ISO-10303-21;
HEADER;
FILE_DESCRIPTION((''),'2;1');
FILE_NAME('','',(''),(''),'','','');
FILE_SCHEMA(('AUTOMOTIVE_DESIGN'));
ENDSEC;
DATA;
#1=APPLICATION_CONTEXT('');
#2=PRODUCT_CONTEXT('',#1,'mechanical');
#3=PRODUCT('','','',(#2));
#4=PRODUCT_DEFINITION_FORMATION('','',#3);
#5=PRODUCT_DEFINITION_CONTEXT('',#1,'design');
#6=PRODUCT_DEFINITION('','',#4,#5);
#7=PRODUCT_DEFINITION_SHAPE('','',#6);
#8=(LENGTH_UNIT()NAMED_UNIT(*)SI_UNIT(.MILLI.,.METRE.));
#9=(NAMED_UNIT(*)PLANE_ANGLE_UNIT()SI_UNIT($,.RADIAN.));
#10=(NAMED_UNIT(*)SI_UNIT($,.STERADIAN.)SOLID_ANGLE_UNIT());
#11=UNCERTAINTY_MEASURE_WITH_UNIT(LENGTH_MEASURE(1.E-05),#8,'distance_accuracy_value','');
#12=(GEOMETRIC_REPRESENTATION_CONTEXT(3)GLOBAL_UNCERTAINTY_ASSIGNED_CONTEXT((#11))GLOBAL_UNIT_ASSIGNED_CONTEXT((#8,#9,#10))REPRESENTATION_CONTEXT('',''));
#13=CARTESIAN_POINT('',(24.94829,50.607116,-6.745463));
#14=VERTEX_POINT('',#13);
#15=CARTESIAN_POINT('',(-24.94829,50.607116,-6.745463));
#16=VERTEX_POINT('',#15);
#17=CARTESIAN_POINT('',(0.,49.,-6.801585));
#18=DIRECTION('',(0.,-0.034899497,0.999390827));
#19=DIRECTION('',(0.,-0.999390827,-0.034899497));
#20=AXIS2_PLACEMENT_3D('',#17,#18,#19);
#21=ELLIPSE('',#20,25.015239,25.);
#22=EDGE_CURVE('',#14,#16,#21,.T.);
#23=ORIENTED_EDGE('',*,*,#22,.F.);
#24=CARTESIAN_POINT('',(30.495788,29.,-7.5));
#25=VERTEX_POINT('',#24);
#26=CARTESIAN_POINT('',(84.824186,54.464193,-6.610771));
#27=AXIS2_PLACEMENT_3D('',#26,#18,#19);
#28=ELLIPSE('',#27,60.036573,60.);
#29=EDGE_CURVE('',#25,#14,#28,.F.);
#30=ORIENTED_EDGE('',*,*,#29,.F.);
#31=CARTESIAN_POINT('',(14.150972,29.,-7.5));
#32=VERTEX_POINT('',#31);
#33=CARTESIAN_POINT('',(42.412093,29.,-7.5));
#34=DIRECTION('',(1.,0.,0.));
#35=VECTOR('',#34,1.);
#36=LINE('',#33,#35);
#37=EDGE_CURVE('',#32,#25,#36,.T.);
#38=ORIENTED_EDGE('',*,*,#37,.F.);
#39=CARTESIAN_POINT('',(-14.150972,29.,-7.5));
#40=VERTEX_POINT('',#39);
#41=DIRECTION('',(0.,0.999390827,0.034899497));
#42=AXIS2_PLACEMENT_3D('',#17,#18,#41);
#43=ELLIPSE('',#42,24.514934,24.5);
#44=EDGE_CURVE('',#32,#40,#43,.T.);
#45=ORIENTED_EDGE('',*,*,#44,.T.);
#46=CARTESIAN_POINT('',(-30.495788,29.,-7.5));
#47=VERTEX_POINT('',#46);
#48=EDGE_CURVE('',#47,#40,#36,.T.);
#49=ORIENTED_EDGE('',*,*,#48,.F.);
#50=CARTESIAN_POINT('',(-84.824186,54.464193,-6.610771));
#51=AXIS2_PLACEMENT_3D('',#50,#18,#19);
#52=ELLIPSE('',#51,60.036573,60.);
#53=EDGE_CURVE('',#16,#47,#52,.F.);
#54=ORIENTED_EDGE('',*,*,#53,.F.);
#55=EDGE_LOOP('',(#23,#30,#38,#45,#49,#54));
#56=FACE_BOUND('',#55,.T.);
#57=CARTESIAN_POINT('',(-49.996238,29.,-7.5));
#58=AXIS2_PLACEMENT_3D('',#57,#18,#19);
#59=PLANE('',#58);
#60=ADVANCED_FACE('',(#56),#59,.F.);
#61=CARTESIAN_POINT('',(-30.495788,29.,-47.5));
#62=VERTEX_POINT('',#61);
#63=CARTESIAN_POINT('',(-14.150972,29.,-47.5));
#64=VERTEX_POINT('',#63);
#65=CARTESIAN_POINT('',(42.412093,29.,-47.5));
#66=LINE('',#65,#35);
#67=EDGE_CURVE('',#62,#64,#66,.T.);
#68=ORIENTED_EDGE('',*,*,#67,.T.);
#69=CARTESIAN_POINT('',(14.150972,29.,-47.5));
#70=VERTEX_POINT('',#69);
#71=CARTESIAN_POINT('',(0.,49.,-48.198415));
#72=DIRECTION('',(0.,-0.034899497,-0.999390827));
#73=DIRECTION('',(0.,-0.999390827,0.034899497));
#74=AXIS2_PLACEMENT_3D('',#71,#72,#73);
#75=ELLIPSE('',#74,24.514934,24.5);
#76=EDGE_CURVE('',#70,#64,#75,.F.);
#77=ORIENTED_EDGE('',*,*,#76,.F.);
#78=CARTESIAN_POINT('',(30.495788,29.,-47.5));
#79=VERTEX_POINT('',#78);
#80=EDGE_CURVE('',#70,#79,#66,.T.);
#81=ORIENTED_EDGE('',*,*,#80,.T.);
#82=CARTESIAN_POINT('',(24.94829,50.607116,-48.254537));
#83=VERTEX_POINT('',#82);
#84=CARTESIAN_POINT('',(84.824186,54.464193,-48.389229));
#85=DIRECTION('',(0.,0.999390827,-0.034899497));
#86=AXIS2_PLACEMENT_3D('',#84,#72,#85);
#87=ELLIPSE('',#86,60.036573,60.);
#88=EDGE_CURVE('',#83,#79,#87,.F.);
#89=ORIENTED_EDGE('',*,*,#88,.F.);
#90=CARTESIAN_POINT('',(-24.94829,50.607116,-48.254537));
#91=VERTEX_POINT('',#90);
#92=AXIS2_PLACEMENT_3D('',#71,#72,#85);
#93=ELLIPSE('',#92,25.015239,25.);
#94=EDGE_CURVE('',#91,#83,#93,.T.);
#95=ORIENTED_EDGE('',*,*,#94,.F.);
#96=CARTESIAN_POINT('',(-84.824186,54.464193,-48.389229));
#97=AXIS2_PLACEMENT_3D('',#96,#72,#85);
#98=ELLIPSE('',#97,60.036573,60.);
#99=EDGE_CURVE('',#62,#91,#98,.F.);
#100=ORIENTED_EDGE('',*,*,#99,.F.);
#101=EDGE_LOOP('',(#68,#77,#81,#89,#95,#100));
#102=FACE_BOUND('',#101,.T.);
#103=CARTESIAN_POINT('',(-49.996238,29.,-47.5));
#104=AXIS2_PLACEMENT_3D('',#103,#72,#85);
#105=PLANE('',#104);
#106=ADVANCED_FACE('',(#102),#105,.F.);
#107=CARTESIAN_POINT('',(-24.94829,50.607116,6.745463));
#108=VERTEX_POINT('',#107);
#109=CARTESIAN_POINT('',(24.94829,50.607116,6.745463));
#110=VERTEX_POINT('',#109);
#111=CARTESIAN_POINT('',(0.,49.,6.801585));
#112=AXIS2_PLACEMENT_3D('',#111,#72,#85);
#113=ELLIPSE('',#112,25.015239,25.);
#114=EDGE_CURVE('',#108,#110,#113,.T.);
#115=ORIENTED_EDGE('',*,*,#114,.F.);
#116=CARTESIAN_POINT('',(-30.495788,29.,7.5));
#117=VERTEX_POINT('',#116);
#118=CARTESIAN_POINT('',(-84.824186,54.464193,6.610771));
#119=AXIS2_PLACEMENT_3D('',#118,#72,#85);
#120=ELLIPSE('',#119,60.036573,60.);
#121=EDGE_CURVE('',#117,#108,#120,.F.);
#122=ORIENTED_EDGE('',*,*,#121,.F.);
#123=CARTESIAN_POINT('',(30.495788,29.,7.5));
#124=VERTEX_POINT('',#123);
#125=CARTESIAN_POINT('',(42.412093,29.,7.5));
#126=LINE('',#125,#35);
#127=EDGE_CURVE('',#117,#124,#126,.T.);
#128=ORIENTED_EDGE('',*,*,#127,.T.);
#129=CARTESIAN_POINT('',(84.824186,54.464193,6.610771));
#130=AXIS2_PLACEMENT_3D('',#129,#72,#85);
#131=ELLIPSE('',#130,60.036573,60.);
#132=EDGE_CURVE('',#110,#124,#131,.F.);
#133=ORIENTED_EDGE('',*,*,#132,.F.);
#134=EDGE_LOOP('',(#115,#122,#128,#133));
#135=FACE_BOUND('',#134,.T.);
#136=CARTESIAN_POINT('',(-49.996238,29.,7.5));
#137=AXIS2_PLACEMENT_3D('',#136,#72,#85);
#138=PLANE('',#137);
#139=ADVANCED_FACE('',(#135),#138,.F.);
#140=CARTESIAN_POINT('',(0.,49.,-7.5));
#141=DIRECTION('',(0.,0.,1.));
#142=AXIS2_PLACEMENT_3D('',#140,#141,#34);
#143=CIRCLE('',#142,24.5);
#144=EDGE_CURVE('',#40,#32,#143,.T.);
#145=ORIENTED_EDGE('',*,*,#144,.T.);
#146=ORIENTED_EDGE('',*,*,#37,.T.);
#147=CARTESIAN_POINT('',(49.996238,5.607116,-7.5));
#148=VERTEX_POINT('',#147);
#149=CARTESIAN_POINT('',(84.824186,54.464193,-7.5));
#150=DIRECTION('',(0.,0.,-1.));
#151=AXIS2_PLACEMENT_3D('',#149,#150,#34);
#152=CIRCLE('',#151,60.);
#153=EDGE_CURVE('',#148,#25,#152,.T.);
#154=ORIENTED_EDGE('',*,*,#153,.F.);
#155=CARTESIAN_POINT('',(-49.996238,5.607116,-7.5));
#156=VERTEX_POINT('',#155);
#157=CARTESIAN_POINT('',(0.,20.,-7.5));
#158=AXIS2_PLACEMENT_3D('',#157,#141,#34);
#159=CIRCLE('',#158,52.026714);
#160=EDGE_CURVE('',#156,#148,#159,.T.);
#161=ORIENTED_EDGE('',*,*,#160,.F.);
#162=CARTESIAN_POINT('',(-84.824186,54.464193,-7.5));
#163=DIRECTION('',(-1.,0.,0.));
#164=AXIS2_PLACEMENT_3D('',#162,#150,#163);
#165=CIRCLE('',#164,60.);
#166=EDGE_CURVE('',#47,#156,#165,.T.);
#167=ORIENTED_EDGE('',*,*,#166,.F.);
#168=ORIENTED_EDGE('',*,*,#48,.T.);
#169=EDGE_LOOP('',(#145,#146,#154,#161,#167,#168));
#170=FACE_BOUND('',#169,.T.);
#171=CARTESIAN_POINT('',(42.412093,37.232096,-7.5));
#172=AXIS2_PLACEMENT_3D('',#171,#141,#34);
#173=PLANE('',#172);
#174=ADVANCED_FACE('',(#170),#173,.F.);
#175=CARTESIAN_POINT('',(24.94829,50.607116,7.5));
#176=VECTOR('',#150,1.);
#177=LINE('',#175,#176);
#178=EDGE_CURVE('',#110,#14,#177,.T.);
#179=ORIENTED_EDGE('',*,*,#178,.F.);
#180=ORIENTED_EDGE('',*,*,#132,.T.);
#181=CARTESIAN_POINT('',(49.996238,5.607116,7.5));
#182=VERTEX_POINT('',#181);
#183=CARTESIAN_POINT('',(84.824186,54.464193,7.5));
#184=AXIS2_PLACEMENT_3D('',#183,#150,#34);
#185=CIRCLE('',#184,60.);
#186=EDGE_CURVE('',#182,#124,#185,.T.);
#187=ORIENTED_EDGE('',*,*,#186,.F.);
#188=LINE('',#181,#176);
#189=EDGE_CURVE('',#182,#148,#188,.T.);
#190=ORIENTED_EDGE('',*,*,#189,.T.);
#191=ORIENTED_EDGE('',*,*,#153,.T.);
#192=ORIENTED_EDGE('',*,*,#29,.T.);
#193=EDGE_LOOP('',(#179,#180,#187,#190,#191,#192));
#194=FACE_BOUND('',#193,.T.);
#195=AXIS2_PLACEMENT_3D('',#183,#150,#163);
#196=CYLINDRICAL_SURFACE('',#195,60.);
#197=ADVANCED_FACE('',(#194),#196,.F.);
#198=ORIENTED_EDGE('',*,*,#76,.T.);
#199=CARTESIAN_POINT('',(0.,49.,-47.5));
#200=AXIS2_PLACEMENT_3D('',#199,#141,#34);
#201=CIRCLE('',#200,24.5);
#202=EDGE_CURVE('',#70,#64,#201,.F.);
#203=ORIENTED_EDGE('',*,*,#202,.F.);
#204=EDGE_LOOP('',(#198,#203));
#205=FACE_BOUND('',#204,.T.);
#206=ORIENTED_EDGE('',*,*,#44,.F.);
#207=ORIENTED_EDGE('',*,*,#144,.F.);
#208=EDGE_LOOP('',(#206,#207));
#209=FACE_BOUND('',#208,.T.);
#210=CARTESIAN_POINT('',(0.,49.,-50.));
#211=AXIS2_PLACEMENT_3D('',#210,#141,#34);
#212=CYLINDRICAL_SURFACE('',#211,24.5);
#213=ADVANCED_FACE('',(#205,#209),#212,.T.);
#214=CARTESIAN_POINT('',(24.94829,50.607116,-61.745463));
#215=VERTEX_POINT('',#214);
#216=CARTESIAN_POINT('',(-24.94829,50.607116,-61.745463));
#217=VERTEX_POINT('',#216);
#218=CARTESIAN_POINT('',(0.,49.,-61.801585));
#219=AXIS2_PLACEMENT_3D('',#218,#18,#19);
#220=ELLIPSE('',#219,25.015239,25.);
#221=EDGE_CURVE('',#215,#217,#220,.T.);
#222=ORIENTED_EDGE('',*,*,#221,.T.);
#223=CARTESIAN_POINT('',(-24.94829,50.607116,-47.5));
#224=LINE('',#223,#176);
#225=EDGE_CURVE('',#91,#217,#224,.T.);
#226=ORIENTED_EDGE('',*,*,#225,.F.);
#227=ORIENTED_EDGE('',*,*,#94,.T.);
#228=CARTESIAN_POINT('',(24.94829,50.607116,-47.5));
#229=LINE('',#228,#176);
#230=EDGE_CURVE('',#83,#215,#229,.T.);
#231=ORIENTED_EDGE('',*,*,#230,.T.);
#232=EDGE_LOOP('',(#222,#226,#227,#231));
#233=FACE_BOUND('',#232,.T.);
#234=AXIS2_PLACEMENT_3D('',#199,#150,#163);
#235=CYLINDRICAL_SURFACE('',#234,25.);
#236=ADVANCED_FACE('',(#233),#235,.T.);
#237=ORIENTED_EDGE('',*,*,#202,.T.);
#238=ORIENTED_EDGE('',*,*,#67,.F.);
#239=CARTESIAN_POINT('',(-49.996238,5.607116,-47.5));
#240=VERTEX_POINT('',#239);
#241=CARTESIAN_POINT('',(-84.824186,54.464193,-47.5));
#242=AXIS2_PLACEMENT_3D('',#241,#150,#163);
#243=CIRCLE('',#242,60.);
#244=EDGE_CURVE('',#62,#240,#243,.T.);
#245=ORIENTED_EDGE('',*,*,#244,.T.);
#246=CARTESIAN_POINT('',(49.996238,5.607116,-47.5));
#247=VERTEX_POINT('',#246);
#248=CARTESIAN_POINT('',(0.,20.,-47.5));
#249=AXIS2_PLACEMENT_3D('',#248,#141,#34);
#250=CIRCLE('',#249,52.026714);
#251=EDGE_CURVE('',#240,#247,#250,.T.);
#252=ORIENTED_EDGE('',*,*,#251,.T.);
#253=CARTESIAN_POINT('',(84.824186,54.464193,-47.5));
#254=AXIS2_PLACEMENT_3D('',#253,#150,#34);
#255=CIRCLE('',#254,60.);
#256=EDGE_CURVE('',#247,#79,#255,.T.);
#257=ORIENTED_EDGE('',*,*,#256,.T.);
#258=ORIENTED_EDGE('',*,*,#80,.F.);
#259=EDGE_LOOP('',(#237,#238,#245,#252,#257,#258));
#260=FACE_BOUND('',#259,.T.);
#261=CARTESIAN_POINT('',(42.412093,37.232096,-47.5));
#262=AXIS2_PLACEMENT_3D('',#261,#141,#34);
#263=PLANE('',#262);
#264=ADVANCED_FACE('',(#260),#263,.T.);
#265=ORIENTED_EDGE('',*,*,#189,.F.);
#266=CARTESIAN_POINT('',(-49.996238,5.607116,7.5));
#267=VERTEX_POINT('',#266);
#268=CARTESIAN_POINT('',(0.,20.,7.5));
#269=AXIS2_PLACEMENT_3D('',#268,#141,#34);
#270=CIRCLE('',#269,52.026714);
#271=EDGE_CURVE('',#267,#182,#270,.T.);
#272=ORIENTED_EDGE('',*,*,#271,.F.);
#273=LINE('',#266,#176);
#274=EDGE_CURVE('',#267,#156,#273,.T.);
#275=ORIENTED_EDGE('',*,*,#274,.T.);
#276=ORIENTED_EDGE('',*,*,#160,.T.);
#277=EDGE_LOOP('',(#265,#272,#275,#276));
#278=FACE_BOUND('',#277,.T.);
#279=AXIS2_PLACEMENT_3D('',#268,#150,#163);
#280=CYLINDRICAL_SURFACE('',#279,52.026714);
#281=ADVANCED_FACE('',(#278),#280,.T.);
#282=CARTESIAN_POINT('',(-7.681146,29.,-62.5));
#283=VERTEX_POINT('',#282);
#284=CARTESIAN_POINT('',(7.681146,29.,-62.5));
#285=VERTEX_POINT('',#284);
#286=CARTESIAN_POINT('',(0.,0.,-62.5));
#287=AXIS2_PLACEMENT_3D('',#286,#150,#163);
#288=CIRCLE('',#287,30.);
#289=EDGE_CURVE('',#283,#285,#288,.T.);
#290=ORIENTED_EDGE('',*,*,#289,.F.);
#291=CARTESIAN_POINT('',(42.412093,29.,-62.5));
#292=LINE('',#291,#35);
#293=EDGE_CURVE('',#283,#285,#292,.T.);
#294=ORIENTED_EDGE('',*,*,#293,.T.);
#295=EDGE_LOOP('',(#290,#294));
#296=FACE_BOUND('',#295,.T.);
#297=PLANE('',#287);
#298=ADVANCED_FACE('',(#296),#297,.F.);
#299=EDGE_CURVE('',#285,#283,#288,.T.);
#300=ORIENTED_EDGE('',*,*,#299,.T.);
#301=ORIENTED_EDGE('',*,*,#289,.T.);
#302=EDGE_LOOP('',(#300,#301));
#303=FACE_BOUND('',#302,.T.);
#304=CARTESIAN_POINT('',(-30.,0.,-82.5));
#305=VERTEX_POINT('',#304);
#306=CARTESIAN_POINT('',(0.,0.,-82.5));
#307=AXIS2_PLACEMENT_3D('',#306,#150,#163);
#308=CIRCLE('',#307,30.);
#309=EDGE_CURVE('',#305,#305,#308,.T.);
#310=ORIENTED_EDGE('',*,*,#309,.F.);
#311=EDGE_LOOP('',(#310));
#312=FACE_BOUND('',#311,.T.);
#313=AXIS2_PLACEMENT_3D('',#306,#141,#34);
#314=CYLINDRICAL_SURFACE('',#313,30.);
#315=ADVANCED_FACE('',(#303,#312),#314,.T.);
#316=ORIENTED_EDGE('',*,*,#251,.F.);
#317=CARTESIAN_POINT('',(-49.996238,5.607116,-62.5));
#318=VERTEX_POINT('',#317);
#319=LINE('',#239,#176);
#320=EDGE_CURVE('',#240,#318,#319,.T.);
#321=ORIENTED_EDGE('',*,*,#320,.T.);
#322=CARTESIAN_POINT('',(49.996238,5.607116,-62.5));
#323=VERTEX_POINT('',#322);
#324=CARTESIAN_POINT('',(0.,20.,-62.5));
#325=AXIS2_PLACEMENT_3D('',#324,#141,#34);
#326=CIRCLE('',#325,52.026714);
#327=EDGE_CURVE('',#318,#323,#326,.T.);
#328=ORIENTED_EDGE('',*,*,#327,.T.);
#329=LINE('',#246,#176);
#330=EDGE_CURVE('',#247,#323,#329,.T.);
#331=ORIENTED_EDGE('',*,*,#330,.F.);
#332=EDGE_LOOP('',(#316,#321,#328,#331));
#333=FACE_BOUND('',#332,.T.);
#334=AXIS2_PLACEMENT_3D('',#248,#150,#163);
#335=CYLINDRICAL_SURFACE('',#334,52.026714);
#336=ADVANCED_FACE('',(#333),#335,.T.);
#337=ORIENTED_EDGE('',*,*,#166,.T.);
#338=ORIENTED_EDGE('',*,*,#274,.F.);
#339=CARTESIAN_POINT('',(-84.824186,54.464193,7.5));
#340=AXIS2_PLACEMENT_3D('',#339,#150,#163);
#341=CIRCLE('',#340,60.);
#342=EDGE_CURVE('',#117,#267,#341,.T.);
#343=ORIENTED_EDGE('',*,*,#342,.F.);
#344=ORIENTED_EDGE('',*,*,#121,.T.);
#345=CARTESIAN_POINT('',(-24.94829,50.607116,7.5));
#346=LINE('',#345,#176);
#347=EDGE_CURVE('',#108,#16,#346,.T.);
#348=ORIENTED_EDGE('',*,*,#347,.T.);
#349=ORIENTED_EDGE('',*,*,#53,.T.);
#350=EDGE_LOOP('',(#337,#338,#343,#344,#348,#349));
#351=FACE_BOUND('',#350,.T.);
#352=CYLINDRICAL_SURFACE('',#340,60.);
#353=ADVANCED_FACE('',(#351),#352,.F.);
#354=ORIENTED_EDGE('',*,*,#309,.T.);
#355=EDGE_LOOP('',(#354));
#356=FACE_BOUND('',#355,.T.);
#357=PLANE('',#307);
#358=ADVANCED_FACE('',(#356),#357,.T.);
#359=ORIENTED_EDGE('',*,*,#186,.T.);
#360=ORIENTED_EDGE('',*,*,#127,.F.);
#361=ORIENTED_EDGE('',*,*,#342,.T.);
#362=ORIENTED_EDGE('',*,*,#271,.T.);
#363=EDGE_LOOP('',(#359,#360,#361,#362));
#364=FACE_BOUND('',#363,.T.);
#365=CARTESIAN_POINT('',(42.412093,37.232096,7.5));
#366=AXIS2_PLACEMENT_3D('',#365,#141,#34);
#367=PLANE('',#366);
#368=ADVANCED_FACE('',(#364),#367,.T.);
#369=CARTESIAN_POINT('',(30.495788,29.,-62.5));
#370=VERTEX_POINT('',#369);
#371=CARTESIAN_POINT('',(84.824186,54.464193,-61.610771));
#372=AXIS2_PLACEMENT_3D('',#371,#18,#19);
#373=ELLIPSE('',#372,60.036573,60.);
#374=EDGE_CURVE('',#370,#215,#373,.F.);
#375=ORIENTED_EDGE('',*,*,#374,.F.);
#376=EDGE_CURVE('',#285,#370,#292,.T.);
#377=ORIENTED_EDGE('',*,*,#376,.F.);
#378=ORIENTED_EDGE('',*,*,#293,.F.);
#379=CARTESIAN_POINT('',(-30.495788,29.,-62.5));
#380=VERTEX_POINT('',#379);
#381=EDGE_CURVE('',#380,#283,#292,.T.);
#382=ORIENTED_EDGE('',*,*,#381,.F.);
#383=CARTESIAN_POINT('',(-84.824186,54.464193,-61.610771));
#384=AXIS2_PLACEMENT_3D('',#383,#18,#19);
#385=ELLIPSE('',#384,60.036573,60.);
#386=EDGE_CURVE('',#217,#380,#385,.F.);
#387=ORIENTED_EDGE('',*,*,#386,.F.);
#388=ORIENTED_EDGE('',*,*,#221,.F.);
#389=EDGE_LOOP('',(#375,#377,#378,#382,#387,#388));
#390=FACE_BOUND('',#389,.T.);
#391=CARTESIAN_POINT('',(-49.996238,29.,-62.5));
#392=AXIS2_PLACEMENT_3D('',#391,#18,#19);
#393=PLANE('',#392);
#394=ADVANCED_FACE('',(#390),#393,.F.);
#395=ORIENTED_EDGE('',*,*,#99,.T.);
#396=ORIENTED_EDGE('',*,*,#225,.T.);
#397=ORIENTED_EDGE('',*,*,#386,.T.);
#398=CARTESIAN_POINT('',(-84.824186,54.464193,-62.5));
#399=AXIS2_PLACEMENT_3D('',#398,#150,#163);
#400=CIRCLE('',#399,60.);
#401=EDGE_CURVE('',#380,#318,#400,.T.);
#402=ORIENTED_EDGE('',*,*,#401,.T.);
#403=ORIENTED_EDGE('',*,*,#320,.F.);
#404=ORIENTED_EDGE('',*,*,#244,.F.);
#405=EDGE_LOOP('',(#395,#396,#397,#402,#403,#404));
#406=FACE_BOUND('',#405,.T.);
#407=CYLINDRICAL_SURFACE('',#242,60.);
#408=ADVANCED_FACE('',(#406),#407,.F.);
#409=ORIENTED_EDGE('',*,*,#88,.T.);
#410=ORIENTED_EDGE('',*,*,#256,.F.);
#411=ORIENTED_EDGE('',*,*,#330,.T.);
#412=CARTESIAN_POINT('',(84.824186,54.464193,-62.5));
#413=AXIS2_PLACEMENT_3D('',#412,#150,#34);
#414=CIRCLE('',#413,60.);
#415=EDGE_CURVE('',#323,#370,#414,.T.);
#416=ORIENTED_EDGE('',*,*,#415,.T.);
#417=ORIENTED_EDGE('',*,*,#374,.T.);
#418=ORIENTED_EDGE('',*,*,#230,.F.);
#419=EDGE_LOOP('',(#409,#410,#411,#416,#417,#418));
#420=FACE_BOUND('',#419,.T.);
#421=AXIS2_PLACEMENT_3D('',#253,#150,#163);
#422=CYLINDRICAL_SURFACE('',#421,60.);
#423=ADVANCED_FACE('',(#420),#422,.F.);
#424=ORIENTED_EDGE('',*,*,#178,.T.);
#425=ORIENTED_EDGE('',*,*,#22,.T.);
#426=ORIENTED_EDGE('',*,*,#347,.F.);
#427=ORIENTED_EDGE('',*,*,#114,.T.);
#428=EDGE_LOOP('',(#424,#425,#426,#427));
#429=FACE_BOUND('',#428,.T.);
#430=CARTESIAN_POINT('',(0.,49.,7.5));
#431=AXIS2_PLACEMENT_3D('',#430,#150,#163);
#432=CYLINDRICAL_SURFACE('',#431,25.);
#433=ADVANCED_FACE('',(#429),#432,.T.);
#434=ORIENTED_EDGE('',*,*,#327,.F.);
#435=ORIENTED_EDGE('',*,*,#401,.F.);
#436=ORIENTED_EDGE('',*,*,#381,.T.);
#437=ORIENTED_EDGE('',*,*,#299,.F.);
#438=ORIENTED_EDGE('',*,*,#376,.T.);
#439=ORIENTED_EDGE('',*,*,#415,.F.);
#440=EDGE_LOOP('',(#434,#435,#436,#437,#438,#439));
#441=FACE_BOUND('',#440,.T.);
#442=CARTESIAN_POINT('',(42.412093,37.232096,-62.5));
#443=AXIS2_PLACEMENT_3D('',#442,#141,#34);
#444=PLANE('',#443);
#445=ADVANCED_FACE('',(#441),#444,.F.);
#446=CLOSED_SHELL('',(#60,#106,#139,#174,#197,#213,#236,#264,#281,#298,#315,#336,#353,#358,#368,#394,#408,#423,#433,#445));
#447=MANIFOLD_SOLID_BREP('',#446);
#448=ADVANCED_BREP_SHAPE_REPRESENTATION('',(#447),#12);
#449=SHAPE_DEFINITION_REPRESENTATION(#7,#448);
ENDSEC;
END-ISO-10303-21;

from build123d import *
from build123d.topology import SkipClean

# Parameters (mm, degrees)
BOSS_EXTRUDE1_DEPTH   = 7.5
CUT_EXTRUDE1_DEPTH    = 90.620722002
SKETCH4_R             = 24.5
BOSS_EXTRUDE3_DEPTH   = 50
LPATTERN6_START       = -60.928565373
LPATTERN6_DEPTH       = 11.857130746
LPATTERN6_START_2     = -62.5
LPATTERN6_2_OUTLINE_R = 24.5
LPATTERN6_2_DEPTH     = 15
LPATTERN6_3_OUTLINE_R = 24.5
LPATTERN6_3_DEPTH     = 1.571434627
LPATTERN6_START_3     = -49.996237981
LPATTERN6_4_DEPTH     = 99.992475962
BOSS_EXTRUDE5_DEPTH   = 10
SKETCH8_R             = 30
BOSS_EXTRUDE7_DEPTH   = 20


with BuildPart() as part:
    # Sketch1 → Boss-Extrude1 (new, symmetric)
    with BuildSketch(Plane.XY):
        with BuildLine():
            ThreePointArc((-24.948290112, 50.607115575), (0, 74), (24.948290112, 50.607115575))
            ThreePointArc((24.948290112, 50.607115575), (32.398481343, 25.282941249), (49.996237981, 5.607115575))
            ThreePointArc((49.996237981, 5.607115575), (0, -32.02671366), (-49.996237981, 5.607115575))
            ThreePointArc((-49.996237981, 5.607115575), (-32.398481343, 25.282941249), (-24.948290112, 50.607115575))
        make_face()
    extrude(amount=BOSS_EXTRUDE1_DEPTH, both=True)

    # Sketch2 → Cut-Extrude1 (cut, symmetric)
    with BuildSketch(Plane(origin=(0, 0, 0), x_dir=(0, 0, -1), z_dir=(1, 0, 0))):
        Polygon((-7.5, 29), (-5.928565373, 74), (-7.5, 74), align=None)
        Polygon((7.5, 74), (7.5, 29), (5.928565373, 74), align=None)
    extrude(amount=CUT_EXTRUDE1_DEPTH, both=True, mode=Mode.SUBTRACT)

    # Sketch4 → Boss-Extrude3 (add)
    with BuildSketch(Plane.XY):
        with Locations((0, 49)):
            Circle(SKETCH4_R)
    extrude(amount=-BOSS_EXTRUDE3_DEPTH)

    # LPattern6: read off the stored shape, not the designer's step
    # LPattern6 outline → LPattern6 (add)
    with BuildSketch(Plane.XY.offset(LPATTERN6_START)):
        with BuildLine():
            ThreePointArc((-49.996237981, 5.607115575), (0, -32.02671366), (49.996237981, 5.607115575))
            ThreePointArc((49.996237981, 5.607115575), (32.398481343, 25.282941249), (24.948290112, 50.607115575))
            ThreePointArc((24.948290112, 50.607115575), (0, 74), (-24.948290112, 50.607115575))
            ThreePointArc((-24.948290112, 50.607115575), (-32.398481343, 25.282941249), (-49.996237981, 5.607115575))
        make_face()
    extrude(amount=LPATTERN6_DEPTH)

    # LPattern6 2 outline → LPattern6 2 (add)
    with BuildSketch(Plane.XY.offset(LPATTERN6_START_2)):
        with BuildLine():
            ThreePointArc((-49.996237981, 5.607115575), (0, -32.02671366), (49.996237981, 5.607115575))
            ThreePointArc((49.996237981, 5.607115575), (32.398481343, 25.282941249), (24.948290112, 50.607115575))
            ThreePointArc((24.948290112, 50.607115575), (0, 74), (-24.948290112, 50.607115575))
            ThreePointArc((-24.948290112, 50.607115575), (-32.398481343, 25.282941249), (-49.996237981, 5.607115575))
        make_face()
        with Locations((0, 49)):
            Circle(LPATTERN6_2_OUTLINE_R, mode=Mode.SUBTRACT)
    extrude(amount=LPATTERN6_2_DEPTH)

    # LPattern6 3 outline → LPattern6 3 (add)
    with BuildSketch(Plane.XY.offset(LPATTERN6_START_2)):
        with Locations((0, 49)):
            Circle(LPATTERN6_3_OUTLINE_R)
    extrude(amount=LPATTERN6_3_DEPTH)

    # LPattern6 4 outline → LPattern6 4 (cut)
    with BuildSketch(Plane.YZ.offset(LPATTERN6_START_3)):
        Polygon((75, -60.893644604), (74, -60.928565373), (29, -62.5), (75, -62.5), align=None)
        Polygon((74, -49.071434627), (75, -49.106355396), (75, -47.5), (29, -47.5), align=None)
    extrude(amount=LPATTERN6_4_DEPTH, mode=Mode.SUBTRACT)

    # Sketch5 → Boss-Extrude5 (add)
    with SkipClean():  # the faces are left unmerged after this step: merging them gives an invalid solid
        with BuildSketch(Plane(origin=(0, 0, -47.5), x_dir=(-1, 0, 0), z_dir=(0, 0, -1))):
            with BuildLine():
                Line((-14.150971698, 29), (14.150971698, 29))
                ThreePointArc((14.150971698, 29), (0, 73.5), (-14.150971698, 29))
            make_face()
        extrude(amount=BOSS_EXTRUDE5_DEPTH)

    # Sketch8 → Boss-Extrude7 (add)
    with SkipClean():  # the faces are left unmerged after this step: merging them gives an invalid solid
        with BuildSketch(Plane(origin=(0, 0, -62.5), x_dir=(-1, 0, 0), z_dir=(0, 0, -1))):
            with Locations(Location((0, 0, 0), (0, 0, 104.835111582))):
                Circle(SKETCH8_R)
        extrude(amount=BOSS_EXTRUDE7_DEPTH)


solid = part.part
